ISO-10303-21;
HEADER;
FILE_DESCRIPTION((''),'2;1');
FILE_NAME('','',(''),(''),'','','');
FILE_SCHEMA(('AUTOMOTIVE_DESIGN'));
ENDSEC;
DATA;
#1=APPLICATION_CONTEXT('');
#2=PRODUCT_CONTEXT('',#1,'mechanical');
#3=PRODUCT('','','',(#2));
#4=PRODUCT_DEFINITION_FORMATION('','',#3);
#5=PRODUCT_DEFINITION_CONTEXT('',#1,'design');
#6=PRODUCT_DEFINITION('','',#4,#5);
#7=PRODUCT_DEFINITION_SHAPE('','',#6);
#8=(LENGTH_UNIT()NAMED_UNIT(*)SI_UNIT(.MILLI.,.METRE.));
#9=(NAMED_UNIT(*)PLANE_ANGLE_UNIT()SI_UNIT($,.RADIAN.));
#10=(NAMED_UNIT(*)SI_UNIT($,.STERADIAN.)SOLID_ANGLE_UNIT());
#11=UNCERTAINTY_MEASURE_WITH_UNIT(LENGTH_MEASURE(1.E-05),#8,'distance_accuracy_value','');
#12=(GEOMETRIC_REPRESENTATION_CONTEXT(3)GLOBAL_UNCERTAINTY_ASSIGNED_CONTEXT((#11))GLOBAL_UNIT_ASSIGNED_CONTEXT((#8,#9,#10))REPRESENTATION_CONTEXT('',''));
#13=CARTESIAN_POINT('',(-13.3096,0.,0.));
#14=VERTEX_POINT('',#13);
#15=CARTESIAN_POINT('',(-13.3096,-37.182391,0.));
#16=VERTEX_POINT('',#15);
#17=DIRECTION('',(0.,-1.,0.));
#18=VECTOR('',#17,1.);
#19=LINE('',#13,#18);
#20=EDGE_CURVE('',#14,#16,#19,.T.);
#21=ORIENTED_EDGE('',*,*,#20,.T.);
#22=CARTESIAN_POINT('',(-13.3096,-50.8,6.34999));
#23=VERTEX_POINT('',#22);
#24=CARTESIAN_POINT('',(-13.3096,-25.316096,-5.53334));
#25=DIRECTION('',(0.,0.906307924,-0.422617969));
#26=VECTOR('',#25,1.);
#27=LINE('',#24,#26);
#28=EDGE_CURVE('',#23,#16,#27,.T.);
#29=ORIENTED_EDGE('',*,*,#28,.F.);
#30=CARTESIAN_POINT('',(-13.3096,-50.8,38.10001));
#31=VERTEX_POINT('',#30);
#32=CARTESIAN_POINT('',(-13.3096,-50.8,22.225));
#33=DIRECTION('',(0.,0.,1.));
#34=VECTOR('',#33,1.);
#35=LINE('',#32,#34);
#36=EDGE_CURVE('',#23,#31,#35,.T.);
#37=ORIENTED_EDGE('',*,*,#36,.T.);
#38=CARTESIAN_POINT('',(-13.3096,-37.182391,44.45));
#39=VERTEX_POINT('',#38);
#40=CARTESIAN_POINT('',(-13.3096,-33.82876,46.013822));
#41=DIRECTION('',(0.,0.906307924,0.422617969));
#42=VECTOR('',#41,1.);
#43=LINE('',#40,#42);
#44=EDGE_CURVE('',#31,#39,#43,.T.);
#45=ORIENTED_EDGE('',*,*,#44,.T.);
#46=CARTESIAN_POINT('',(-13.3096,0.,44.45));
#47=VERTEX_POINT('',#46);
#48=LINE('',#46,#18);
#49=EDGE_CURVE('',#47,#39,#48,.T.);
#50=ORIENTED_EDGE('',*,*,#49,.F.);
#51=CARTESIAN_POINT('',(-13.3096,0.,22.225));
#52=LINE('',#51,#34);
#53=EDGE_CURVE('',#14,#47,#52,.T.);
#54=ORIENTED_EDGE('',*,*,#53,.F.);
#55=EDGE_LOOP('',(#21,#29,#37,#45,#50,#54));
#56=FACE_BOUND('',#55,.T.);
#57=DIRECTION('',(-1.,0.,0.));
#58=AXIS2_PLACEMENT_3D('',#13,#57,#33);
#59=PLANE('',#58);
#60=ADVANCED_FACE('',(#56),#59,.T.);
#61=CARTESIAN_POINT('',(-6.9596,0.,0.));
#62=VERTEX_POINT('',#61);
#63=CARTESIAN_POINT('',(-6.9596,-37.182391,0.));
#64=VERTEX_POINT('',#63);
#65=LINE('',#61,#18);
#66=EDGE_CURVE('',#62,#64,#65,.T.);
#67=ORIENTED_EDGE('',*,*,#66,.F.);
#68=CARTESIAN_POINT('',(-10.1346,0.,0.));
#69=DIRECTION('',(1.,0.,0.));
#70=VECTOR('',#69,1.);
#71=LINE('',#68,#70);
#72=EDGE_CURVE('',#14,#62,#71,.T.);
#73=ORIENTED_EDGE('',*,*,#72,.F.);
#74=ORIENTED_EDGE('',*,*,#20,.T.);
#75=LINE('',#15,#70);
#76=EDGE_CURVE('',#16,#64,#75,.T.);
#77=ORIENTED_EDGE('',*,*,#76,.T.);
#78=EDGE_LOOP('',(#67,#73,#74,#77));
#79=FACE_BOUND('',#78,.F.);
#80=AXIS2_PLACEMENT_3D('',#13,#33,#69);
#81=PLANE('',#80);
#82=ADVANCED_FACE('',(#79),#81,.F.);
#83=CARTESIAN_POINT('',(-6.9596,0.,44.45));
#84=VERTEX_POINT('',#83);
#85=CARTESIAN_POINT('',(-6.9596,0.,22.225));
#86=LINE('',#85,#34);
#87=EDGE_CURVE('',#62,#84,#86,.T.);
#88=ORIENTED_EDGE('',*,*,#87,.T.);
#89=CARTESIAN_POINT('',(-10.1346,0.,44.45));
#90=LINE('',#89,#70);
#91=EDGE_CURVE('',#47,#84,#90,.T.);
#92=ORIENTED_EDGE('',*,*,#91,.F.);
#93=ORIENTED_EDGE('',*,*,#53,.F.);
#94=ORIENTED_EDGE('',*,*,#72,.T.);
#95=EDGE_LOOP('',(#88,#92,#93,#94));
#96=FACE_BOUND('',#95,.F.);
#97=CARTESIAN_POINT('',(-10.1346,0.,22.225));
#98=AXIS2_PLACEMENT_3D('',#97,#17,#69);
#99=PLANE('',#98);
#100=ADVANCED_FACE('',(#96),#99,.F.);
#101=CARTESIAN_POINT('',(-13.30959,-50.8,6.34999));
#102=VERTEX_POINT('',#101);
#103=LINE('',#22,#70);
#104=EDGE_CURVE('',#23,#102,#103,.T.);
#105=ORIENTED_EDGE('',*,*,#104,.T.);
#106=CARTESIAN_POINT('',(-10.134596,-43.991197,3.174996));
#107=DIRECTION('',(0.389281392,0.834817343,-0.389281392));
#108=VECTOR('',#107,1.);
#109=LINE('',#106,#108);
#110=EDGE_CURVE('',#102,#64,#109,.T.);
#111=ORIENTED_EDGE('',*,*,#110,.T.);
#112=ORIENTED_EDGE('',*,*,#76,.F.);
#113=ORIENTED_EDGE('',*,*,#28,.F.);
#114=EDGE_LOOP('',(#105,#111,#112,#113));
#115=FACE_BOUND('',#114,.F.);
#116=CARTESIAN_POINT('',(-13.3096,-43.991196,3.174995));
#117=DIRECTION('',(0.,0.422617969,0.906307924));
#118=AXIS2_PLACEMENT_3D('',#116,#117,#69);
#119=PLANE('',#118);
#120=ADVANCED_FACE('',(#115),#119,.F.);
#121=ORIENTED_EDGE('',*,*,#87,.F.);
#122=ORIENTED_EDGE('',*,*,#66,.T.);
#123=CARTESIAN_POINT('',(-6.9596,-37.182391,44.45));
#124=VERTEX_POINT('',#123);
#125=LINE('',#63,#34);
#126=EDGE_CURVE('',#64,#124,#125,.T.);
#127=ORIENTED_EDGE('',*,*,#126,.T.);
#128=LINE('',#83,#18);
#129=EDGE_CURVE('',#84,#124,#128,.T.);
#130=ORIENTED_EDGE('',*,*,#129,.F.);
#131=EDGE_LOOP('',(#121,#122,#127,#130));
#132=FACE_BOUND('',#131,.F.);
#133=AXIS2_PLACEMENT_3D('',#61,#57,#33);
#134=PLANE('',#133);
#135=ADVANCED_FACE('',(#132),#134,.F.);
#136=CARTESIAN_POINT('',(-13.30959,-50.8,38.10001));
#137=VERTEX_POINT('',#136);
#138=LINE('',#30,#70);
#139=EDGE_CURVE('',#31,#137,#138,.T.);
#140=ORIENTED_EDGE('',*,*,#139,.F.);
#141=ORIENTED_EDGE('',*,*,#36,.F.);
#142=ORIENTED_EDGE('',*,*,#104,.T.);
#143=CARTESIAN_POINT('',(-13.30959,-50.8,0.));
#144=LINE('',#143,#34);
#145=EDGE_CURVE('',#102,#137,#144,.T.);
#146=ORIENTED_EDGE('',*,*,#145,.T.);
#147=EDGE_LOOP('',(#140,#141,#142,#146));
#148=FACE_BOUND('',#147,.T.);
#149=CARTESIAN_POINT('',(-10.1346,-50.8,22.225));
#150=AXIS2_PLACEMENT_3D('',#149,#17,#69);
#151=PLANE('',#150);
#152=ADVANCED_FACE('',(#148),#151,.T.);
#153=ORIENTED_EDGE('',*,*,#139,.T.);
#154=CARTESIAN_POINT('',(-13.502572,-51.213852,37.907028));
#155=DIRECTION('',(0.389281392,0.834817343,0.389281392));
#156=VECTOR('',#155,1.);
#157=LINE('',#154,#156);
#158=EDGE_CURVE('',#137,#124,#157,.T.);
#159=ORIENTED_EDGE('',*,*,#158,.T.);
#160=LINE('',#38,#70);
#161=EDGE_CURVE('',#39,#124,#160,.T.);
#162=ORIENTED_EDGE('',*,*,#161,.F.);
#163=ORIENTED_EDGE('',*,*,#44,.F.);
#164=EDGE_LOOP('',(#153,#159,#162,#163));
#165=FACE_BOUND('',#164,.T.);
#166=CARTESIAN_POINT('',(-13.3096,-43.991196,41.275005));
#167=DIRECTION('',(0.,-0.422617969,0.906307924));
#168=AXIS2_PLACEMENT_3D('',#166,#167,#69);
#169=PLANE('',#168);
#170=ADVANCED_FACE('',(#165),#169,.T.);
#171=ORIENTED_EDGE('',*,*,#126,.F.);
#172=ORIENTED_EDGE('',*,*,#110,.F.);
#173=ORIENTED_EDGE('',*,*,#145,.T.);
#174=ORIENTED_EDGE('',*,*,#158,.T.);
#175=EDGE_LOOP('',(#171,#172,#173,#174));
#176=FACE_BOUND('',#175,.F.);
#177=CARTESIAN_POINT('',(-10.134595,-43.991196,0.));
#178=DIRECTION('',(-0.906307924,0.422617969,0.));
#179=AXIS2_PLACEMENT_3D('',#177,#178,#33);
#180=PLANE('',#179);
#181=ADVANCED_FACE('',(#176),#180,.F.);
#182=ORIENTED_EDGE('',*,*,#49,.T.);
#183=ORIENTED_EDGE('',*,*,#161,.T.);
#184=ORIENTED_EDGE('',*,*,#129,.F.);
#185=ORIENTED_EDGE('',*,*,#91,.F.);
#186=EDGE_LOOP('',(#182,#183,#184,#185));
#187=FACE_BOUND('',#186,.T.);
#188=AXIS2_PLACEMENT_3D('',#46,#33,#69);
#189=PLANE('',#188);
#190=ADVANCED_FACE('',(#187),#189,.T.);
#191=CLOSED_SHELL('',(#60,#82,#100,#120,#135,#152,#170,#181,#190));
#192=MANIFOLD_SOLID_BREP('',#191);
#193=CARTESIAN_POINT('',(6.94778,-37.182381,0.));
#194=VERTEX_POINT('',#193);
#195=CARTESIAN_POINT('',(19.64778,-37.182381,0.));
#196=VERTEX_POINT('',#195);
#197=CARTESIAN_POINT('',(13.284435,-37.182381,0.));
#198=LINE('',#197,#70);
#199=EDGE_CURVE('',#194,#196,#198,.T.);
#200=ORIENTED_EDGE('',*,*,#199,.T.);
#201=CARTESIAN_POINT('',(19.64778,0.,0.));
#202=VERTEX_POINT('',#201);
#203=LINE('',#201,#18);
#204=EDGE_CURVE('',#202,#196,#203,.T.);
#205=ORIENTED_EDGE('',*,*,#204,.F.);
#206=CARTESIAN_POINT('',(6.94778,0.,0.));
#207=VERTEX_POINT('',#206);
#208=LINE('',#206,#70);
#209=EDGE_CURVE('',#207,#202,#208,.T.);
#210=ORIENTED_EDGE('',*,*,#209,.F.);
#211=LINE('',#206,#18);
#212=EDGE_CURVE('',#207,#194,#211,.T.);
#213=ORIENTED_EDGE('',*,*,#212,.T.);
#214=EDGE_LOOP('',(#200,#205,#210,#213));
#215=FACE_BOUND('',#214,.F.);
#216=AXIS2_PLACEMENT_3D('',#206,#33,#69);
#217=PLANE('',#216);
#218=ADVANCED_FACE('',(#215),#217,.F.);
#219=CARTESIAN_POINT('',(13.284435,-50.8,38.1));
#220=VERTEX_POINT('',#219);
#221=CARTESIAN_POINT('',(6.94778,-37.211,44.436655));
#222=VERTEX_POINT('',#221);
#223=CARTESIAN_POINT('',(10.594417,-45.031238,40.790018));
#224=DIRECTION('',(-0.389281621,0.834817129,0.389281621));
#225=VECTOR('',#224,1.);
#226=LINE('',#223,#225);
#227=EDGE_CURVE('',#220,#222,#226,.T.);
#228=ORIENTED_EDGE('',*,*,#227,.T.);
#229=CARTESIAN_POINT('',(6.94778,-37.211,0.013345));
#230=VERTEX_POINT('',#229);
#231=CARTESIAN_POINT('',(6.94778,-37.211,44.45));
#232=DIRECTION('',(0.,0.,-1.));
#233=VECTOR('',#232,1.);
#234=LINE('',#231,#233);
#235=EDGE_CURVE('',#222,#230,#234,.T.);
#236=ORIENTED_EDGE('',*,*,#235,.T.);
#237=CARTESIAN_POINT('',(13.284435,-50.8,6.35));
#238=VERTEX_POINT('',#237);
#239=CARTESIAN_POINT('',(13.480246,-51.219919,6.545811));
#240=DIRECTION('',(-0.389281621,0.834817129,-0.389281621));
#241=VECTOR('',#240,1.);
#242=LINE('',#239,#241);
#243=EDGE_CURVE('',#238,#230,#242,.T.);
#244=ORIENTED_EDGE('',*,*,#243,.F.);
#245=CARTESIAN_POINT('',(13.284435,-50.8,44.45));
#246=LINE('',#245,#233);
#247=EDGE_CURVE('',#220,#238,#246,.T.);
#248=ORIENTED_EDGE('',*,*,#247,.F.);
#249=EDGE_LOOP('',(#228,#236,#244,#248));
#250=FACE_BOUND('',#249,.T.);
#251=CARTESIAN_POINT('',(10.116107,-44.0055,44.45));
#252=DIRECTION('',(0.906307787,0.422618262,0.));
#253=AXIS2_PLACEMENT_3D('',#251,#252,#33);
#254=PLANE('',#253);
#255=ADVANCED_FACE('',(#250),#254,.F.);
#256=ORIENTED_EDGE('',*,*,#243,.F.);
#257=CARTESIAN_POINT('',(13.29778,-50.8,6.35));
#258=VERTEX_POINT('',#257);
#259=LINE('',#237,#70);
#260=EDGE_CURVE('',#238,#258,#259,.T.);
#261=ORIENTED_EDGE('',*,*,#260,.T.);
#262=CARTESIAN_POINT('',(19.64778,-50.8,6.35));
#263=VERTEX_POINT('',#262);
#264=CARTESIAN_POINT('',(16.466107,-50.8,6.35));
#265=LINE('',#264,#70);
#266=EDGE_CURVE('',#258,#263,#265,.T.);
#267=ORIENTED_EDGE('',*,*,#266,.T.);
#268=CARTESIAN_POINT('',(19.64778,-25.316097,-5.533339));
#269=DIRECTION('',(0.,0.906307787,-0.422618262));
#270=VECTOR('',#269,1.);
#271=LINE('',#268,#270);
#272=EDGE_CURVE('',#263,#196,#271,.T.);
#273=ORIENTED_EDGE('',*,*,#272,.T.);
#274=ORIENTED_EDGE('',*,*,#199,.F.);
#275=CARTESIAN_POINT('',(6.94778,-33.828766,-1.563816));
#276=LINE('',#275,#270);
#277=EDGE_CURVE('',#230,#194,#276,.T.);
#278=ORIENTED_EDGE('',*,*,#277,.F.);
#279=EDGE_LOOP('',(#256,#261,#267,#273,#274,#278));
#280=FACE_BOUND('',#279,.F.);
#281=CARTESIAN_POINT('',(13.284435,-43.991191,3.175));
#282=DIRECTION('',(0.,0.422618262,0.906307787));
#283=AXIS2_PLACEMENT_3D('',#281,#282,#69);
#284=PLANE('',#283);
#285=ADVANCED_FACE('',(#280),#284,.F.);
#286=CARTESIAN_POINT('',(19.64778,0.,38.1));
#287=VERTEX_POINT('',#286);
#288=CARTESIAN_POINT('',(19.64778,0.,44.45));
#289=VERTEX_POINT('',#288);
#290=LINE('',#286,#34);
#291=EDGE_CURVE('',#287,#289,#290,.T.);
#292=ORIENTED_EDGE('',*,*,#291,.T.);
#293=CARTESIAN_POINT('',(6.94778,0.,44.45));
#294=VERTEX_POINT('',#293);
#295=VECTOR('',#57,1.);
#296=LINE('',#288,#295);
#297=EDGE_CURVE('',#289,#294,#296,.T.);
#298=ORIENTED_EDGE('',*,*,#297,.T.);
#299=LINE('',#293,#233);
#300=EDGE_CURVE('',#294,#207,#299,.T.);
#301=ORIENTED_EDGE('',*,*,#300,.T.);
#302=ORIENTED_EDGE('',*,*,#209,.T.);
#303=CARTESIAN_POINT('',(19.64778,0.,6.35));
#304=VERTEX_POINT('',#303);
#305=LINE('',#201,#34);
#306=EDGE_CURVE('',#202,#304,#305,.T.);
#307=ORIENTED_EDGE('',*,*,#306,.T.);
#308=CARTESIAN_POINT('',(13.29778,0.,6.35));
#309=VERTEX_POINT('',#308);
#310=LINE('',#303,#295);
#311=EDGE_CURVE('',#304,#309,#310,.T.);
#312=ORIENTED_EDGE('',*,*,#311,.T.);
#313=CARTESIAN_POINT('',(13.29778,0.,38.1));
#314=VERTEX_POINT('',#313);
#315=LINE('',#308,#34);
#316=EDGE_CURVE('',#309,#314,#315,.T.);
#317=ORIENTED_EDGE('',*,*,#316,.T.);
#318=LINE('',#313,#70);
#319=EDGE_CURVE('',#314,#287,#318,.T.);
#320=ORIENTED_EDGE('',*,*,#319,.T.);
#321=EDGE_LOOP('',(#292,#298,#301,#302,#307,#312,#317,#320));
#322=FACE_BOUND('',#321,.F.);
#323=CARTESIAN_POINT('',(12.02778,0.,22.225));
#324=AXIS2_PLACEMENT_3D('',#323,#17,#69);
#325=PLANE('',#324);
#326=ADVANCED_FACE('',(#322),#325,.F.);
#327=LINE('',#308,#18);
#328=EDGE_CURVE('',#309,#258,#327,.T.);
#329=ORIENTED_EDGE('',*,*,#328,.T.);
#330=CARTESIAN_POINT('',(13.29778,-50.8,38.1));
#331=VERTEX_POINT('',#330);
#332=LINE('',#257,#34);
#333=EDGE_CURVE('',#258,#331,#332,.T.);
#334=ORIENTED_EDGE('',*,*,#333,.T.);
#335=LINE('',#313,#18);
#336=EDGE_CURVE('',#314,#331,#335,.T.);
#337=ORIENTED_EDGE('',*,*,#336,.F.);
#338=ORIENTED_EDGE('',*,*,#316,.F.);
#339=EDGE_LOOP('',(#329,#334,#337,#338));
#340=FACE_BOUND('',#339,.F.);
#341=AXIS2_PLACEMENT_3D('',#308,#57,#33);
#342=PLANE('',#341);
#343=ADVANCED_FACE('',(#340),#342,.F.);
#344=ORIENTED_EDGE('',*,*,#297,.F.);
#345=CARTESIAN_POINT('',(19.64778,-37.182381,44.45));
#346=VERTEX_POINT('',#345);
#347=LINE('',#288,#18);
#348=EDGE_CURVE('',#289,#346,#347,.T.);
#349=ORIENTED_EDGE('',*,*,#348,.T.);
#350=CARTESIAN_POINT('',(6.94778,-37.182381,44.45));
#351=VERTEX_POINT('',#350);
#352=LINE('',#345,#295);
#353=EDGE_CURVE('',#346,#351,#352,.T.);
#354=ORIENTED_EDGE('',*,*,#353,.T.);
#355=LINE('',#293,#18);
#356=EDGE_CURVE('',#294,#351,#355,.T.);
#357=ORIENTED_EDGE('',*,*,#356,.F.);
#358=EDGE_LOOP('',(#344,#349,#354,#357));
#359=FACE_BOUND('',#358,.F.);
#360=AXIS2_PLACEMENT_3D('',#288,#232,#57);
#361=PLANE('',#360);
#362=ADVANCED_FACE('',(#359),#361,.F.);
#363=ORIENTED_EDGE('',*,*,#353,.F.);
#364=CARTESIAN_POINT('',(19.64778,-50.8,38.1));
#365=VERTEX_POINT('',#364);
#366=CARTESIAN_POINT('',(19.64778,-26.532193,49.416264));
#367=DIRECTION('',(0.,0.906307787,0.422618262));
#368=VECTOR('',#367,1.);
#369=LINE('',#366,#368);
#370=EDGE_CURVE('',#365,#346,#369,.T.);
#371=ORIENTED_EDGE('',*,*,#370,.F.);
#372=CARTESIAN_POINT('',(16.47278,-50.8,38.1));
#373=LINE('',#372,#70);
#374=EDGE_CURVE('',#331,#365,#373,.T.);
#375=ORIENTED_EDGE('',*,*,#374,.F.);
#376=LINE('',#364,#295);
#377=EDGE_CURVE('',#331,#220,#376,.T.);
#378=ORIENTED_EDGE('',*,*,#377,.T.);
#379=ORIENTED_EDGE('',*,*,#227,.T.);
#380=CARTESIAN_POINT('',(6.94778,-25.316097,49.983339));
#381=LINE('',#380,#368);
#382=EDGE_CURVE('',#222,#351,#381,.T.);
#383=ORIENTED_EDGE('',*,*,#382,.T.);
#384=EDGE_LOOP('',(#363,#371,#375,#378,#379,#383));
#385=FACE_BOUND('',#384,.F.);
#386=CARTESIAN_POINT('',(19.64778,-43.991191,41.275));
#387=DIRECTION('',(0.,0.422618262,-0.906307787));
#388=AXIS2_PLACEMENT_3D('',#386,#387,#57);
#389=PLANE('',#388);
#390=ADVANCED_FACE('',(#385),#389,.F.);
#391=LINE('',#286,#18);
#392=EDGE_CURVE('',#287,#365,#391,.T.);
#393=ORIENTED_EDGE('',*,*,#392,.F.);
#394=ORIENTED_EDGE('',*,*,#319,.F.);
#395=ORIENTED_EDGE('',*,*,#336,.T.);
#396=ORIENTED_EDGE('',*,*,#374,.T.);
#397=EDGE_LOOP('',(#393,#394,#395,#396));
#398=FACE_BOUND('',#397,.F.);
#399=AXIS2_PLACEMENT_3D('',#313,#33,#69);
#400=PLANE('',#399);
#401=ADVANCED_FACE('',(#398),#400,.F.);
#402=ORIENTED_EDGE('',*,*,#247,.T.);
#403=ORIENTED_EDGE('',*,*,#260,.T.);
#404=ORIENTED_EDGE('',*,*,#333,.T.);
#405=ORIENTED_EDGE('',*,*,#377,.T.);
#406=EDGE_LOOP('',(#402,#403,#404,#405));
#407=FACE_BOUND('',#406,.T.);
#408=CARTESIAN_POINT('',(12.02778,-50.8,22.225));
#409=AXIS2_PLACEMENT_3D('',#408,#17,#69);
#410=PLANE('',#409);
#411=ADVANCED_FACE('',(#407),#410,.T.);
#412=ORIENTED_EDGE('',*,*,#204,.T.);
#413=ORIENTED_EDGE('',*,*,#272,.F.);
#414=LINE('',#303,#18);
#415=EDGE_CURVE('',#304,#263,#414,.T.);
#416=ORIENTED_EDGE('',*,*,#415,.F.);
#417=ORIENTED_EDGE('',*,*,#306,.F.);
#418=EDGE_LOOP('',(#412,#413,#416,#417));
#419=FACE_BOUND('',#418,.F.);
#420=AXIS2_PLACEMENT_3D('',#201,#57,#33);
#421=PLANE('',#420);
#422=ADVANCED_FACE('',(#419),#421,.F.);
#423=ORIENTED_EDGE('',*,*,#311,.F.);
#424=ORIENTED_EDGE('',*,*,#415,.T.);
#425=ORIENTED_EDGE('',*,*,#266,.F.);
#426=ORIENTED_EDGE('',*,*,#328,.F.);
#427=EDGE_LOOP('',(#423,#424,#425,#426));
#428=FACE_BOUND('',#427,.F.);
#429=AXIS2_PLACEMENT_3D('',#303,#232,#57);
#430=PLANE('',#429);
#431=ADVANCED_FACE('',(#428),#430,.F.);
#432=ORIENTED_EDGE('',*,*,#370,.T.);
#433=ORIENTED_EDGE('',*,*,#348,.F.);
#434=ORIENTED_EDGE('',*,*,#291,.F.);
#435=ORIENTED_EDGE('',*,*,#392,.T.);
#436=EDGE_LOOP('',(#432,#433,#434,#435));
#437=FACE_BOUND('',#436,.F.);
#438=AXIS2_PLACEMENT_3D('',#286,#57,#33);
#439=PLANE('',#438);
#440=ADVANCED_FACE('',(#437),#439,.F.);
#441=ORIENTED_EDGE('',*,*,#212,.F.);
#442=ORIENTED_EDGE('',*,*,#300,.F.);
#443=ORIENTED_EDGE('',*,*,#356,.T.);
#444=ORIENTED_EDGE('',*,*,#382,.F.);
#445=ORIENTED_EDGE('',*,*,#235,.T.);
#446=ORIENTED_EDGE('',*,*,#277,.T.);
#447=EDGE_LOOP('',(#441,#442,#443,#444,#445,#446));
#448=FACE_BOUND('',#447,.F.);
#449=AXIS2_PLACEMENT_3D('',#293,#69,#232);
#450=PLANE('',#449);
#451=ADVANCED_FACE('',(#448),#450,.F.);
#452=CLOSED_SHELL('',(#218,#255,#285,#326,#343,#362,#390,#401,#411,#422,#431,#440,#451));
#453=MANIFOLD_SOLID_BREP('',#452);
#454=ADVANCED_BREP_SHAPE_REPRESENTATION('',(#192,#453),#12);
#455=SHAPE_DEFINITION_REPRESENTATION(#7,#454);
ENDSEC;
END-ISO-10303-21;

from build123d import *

# Parameters (mm, degrees)
F1_DEPTH = 50.8
F2_W     = 6.35
F2_H     = 44.45
F3_DEPTH = 50.8
F4_SIZE2 = 6.3366547667
F4_SIZE  = 13.589
F5_SIZE2 = 13.6176189452
F5_SIZE  = 6.35
F6_SIZE2 = 13.6176189452
F6_SIZE  = 6.35
F7_SIZE2 = 13.617609
F7_SIZE  = 6.34999


# Not quite as in the source:
# - a fillet or chamfer is up to 0.001 mm smaller than in the source, because OpenCascade refuses the exact size


with BuildPart() as f1:
    # F0 (on Front) → F1 (new body)
    with BuildSketch(Plane.XZ):
        Polygon((19.6477800332, 38.1), (19.6477800332, 44.45), (6.9477800332, 44.45), (6.9477800332, 0), (19.6477800332, 0), (19.6477800332, 6.35), (13.2977800332, 6.35), (13.2977800332, 38.1), align=None)
    extrude(amount=F1_DEPTH)

    # F4
    f4_edges = [f1.edges().sort_by_distance(p)[0] for p in [
        (6.94778, -50.8, 22.225),
    ]]
    f4_side = f1.faces().sort_by_distance((6.94778, -25.4, 22.225))[0]
    chamfer(f4_edges, length=F4_SIZE, length2=F4_SIZE2, reference=f4_side)

    # F5
    f5_edges = [f1.edges().sort_by_distance(p)[0] for p in [
        (16.466107, -50.8, 0),
    ]]
    f5_side = f1.faces().sort_by_distance((16.466107, -50.8, 44.000968))[0]
    chamfer(f5_edges, length=F5_SIZE, length2=F5_SIZE2, reference=f5_side)

    # F6
    f6_edges = [f1.edges().sort_by_distance(p)[0] for p in [
        (16.466107, -50.8, 44.45),
    ]]
    f6_side = f1.faces().sort_by_distance((16.43316, -50.8, 41.077314))[0]
    chamfer(f6_edges, length=F6_SIZE, length2=F6_SIZE2, reference=f6_side)


with BuildPart() as f3:
    # F2 (on Front) → F3 (new body)
    with BuildSketch(Plane.XZ):
        with Locations((-10.1346, 22.225)):
            Rectangle(F2_W, F2_H)
    extrude(amount=F3_DEPTH)

    # F7 (size 6.35 and 13.6176189452 in the source; OpenCascade refuses exactly that, so slightly less here)
    f7_edges = [f3.edges().sort_by_distance(p)[0] for p in [
        (-6.9596, -50.8, 22.225),
        (-10.1346, -50.8, 44.45),
        (-10.1346, -50.8, 0),
    ]]
    f7_side = f3.faces().sort_by_distance((-10.1346, -50.8, 22.225))[0]
    chamfer(f7_edges, length=F7_SIZE, length2=F7_SIZE2, reference=f7_side)


solid = Compound([f1.part, f3.part])
